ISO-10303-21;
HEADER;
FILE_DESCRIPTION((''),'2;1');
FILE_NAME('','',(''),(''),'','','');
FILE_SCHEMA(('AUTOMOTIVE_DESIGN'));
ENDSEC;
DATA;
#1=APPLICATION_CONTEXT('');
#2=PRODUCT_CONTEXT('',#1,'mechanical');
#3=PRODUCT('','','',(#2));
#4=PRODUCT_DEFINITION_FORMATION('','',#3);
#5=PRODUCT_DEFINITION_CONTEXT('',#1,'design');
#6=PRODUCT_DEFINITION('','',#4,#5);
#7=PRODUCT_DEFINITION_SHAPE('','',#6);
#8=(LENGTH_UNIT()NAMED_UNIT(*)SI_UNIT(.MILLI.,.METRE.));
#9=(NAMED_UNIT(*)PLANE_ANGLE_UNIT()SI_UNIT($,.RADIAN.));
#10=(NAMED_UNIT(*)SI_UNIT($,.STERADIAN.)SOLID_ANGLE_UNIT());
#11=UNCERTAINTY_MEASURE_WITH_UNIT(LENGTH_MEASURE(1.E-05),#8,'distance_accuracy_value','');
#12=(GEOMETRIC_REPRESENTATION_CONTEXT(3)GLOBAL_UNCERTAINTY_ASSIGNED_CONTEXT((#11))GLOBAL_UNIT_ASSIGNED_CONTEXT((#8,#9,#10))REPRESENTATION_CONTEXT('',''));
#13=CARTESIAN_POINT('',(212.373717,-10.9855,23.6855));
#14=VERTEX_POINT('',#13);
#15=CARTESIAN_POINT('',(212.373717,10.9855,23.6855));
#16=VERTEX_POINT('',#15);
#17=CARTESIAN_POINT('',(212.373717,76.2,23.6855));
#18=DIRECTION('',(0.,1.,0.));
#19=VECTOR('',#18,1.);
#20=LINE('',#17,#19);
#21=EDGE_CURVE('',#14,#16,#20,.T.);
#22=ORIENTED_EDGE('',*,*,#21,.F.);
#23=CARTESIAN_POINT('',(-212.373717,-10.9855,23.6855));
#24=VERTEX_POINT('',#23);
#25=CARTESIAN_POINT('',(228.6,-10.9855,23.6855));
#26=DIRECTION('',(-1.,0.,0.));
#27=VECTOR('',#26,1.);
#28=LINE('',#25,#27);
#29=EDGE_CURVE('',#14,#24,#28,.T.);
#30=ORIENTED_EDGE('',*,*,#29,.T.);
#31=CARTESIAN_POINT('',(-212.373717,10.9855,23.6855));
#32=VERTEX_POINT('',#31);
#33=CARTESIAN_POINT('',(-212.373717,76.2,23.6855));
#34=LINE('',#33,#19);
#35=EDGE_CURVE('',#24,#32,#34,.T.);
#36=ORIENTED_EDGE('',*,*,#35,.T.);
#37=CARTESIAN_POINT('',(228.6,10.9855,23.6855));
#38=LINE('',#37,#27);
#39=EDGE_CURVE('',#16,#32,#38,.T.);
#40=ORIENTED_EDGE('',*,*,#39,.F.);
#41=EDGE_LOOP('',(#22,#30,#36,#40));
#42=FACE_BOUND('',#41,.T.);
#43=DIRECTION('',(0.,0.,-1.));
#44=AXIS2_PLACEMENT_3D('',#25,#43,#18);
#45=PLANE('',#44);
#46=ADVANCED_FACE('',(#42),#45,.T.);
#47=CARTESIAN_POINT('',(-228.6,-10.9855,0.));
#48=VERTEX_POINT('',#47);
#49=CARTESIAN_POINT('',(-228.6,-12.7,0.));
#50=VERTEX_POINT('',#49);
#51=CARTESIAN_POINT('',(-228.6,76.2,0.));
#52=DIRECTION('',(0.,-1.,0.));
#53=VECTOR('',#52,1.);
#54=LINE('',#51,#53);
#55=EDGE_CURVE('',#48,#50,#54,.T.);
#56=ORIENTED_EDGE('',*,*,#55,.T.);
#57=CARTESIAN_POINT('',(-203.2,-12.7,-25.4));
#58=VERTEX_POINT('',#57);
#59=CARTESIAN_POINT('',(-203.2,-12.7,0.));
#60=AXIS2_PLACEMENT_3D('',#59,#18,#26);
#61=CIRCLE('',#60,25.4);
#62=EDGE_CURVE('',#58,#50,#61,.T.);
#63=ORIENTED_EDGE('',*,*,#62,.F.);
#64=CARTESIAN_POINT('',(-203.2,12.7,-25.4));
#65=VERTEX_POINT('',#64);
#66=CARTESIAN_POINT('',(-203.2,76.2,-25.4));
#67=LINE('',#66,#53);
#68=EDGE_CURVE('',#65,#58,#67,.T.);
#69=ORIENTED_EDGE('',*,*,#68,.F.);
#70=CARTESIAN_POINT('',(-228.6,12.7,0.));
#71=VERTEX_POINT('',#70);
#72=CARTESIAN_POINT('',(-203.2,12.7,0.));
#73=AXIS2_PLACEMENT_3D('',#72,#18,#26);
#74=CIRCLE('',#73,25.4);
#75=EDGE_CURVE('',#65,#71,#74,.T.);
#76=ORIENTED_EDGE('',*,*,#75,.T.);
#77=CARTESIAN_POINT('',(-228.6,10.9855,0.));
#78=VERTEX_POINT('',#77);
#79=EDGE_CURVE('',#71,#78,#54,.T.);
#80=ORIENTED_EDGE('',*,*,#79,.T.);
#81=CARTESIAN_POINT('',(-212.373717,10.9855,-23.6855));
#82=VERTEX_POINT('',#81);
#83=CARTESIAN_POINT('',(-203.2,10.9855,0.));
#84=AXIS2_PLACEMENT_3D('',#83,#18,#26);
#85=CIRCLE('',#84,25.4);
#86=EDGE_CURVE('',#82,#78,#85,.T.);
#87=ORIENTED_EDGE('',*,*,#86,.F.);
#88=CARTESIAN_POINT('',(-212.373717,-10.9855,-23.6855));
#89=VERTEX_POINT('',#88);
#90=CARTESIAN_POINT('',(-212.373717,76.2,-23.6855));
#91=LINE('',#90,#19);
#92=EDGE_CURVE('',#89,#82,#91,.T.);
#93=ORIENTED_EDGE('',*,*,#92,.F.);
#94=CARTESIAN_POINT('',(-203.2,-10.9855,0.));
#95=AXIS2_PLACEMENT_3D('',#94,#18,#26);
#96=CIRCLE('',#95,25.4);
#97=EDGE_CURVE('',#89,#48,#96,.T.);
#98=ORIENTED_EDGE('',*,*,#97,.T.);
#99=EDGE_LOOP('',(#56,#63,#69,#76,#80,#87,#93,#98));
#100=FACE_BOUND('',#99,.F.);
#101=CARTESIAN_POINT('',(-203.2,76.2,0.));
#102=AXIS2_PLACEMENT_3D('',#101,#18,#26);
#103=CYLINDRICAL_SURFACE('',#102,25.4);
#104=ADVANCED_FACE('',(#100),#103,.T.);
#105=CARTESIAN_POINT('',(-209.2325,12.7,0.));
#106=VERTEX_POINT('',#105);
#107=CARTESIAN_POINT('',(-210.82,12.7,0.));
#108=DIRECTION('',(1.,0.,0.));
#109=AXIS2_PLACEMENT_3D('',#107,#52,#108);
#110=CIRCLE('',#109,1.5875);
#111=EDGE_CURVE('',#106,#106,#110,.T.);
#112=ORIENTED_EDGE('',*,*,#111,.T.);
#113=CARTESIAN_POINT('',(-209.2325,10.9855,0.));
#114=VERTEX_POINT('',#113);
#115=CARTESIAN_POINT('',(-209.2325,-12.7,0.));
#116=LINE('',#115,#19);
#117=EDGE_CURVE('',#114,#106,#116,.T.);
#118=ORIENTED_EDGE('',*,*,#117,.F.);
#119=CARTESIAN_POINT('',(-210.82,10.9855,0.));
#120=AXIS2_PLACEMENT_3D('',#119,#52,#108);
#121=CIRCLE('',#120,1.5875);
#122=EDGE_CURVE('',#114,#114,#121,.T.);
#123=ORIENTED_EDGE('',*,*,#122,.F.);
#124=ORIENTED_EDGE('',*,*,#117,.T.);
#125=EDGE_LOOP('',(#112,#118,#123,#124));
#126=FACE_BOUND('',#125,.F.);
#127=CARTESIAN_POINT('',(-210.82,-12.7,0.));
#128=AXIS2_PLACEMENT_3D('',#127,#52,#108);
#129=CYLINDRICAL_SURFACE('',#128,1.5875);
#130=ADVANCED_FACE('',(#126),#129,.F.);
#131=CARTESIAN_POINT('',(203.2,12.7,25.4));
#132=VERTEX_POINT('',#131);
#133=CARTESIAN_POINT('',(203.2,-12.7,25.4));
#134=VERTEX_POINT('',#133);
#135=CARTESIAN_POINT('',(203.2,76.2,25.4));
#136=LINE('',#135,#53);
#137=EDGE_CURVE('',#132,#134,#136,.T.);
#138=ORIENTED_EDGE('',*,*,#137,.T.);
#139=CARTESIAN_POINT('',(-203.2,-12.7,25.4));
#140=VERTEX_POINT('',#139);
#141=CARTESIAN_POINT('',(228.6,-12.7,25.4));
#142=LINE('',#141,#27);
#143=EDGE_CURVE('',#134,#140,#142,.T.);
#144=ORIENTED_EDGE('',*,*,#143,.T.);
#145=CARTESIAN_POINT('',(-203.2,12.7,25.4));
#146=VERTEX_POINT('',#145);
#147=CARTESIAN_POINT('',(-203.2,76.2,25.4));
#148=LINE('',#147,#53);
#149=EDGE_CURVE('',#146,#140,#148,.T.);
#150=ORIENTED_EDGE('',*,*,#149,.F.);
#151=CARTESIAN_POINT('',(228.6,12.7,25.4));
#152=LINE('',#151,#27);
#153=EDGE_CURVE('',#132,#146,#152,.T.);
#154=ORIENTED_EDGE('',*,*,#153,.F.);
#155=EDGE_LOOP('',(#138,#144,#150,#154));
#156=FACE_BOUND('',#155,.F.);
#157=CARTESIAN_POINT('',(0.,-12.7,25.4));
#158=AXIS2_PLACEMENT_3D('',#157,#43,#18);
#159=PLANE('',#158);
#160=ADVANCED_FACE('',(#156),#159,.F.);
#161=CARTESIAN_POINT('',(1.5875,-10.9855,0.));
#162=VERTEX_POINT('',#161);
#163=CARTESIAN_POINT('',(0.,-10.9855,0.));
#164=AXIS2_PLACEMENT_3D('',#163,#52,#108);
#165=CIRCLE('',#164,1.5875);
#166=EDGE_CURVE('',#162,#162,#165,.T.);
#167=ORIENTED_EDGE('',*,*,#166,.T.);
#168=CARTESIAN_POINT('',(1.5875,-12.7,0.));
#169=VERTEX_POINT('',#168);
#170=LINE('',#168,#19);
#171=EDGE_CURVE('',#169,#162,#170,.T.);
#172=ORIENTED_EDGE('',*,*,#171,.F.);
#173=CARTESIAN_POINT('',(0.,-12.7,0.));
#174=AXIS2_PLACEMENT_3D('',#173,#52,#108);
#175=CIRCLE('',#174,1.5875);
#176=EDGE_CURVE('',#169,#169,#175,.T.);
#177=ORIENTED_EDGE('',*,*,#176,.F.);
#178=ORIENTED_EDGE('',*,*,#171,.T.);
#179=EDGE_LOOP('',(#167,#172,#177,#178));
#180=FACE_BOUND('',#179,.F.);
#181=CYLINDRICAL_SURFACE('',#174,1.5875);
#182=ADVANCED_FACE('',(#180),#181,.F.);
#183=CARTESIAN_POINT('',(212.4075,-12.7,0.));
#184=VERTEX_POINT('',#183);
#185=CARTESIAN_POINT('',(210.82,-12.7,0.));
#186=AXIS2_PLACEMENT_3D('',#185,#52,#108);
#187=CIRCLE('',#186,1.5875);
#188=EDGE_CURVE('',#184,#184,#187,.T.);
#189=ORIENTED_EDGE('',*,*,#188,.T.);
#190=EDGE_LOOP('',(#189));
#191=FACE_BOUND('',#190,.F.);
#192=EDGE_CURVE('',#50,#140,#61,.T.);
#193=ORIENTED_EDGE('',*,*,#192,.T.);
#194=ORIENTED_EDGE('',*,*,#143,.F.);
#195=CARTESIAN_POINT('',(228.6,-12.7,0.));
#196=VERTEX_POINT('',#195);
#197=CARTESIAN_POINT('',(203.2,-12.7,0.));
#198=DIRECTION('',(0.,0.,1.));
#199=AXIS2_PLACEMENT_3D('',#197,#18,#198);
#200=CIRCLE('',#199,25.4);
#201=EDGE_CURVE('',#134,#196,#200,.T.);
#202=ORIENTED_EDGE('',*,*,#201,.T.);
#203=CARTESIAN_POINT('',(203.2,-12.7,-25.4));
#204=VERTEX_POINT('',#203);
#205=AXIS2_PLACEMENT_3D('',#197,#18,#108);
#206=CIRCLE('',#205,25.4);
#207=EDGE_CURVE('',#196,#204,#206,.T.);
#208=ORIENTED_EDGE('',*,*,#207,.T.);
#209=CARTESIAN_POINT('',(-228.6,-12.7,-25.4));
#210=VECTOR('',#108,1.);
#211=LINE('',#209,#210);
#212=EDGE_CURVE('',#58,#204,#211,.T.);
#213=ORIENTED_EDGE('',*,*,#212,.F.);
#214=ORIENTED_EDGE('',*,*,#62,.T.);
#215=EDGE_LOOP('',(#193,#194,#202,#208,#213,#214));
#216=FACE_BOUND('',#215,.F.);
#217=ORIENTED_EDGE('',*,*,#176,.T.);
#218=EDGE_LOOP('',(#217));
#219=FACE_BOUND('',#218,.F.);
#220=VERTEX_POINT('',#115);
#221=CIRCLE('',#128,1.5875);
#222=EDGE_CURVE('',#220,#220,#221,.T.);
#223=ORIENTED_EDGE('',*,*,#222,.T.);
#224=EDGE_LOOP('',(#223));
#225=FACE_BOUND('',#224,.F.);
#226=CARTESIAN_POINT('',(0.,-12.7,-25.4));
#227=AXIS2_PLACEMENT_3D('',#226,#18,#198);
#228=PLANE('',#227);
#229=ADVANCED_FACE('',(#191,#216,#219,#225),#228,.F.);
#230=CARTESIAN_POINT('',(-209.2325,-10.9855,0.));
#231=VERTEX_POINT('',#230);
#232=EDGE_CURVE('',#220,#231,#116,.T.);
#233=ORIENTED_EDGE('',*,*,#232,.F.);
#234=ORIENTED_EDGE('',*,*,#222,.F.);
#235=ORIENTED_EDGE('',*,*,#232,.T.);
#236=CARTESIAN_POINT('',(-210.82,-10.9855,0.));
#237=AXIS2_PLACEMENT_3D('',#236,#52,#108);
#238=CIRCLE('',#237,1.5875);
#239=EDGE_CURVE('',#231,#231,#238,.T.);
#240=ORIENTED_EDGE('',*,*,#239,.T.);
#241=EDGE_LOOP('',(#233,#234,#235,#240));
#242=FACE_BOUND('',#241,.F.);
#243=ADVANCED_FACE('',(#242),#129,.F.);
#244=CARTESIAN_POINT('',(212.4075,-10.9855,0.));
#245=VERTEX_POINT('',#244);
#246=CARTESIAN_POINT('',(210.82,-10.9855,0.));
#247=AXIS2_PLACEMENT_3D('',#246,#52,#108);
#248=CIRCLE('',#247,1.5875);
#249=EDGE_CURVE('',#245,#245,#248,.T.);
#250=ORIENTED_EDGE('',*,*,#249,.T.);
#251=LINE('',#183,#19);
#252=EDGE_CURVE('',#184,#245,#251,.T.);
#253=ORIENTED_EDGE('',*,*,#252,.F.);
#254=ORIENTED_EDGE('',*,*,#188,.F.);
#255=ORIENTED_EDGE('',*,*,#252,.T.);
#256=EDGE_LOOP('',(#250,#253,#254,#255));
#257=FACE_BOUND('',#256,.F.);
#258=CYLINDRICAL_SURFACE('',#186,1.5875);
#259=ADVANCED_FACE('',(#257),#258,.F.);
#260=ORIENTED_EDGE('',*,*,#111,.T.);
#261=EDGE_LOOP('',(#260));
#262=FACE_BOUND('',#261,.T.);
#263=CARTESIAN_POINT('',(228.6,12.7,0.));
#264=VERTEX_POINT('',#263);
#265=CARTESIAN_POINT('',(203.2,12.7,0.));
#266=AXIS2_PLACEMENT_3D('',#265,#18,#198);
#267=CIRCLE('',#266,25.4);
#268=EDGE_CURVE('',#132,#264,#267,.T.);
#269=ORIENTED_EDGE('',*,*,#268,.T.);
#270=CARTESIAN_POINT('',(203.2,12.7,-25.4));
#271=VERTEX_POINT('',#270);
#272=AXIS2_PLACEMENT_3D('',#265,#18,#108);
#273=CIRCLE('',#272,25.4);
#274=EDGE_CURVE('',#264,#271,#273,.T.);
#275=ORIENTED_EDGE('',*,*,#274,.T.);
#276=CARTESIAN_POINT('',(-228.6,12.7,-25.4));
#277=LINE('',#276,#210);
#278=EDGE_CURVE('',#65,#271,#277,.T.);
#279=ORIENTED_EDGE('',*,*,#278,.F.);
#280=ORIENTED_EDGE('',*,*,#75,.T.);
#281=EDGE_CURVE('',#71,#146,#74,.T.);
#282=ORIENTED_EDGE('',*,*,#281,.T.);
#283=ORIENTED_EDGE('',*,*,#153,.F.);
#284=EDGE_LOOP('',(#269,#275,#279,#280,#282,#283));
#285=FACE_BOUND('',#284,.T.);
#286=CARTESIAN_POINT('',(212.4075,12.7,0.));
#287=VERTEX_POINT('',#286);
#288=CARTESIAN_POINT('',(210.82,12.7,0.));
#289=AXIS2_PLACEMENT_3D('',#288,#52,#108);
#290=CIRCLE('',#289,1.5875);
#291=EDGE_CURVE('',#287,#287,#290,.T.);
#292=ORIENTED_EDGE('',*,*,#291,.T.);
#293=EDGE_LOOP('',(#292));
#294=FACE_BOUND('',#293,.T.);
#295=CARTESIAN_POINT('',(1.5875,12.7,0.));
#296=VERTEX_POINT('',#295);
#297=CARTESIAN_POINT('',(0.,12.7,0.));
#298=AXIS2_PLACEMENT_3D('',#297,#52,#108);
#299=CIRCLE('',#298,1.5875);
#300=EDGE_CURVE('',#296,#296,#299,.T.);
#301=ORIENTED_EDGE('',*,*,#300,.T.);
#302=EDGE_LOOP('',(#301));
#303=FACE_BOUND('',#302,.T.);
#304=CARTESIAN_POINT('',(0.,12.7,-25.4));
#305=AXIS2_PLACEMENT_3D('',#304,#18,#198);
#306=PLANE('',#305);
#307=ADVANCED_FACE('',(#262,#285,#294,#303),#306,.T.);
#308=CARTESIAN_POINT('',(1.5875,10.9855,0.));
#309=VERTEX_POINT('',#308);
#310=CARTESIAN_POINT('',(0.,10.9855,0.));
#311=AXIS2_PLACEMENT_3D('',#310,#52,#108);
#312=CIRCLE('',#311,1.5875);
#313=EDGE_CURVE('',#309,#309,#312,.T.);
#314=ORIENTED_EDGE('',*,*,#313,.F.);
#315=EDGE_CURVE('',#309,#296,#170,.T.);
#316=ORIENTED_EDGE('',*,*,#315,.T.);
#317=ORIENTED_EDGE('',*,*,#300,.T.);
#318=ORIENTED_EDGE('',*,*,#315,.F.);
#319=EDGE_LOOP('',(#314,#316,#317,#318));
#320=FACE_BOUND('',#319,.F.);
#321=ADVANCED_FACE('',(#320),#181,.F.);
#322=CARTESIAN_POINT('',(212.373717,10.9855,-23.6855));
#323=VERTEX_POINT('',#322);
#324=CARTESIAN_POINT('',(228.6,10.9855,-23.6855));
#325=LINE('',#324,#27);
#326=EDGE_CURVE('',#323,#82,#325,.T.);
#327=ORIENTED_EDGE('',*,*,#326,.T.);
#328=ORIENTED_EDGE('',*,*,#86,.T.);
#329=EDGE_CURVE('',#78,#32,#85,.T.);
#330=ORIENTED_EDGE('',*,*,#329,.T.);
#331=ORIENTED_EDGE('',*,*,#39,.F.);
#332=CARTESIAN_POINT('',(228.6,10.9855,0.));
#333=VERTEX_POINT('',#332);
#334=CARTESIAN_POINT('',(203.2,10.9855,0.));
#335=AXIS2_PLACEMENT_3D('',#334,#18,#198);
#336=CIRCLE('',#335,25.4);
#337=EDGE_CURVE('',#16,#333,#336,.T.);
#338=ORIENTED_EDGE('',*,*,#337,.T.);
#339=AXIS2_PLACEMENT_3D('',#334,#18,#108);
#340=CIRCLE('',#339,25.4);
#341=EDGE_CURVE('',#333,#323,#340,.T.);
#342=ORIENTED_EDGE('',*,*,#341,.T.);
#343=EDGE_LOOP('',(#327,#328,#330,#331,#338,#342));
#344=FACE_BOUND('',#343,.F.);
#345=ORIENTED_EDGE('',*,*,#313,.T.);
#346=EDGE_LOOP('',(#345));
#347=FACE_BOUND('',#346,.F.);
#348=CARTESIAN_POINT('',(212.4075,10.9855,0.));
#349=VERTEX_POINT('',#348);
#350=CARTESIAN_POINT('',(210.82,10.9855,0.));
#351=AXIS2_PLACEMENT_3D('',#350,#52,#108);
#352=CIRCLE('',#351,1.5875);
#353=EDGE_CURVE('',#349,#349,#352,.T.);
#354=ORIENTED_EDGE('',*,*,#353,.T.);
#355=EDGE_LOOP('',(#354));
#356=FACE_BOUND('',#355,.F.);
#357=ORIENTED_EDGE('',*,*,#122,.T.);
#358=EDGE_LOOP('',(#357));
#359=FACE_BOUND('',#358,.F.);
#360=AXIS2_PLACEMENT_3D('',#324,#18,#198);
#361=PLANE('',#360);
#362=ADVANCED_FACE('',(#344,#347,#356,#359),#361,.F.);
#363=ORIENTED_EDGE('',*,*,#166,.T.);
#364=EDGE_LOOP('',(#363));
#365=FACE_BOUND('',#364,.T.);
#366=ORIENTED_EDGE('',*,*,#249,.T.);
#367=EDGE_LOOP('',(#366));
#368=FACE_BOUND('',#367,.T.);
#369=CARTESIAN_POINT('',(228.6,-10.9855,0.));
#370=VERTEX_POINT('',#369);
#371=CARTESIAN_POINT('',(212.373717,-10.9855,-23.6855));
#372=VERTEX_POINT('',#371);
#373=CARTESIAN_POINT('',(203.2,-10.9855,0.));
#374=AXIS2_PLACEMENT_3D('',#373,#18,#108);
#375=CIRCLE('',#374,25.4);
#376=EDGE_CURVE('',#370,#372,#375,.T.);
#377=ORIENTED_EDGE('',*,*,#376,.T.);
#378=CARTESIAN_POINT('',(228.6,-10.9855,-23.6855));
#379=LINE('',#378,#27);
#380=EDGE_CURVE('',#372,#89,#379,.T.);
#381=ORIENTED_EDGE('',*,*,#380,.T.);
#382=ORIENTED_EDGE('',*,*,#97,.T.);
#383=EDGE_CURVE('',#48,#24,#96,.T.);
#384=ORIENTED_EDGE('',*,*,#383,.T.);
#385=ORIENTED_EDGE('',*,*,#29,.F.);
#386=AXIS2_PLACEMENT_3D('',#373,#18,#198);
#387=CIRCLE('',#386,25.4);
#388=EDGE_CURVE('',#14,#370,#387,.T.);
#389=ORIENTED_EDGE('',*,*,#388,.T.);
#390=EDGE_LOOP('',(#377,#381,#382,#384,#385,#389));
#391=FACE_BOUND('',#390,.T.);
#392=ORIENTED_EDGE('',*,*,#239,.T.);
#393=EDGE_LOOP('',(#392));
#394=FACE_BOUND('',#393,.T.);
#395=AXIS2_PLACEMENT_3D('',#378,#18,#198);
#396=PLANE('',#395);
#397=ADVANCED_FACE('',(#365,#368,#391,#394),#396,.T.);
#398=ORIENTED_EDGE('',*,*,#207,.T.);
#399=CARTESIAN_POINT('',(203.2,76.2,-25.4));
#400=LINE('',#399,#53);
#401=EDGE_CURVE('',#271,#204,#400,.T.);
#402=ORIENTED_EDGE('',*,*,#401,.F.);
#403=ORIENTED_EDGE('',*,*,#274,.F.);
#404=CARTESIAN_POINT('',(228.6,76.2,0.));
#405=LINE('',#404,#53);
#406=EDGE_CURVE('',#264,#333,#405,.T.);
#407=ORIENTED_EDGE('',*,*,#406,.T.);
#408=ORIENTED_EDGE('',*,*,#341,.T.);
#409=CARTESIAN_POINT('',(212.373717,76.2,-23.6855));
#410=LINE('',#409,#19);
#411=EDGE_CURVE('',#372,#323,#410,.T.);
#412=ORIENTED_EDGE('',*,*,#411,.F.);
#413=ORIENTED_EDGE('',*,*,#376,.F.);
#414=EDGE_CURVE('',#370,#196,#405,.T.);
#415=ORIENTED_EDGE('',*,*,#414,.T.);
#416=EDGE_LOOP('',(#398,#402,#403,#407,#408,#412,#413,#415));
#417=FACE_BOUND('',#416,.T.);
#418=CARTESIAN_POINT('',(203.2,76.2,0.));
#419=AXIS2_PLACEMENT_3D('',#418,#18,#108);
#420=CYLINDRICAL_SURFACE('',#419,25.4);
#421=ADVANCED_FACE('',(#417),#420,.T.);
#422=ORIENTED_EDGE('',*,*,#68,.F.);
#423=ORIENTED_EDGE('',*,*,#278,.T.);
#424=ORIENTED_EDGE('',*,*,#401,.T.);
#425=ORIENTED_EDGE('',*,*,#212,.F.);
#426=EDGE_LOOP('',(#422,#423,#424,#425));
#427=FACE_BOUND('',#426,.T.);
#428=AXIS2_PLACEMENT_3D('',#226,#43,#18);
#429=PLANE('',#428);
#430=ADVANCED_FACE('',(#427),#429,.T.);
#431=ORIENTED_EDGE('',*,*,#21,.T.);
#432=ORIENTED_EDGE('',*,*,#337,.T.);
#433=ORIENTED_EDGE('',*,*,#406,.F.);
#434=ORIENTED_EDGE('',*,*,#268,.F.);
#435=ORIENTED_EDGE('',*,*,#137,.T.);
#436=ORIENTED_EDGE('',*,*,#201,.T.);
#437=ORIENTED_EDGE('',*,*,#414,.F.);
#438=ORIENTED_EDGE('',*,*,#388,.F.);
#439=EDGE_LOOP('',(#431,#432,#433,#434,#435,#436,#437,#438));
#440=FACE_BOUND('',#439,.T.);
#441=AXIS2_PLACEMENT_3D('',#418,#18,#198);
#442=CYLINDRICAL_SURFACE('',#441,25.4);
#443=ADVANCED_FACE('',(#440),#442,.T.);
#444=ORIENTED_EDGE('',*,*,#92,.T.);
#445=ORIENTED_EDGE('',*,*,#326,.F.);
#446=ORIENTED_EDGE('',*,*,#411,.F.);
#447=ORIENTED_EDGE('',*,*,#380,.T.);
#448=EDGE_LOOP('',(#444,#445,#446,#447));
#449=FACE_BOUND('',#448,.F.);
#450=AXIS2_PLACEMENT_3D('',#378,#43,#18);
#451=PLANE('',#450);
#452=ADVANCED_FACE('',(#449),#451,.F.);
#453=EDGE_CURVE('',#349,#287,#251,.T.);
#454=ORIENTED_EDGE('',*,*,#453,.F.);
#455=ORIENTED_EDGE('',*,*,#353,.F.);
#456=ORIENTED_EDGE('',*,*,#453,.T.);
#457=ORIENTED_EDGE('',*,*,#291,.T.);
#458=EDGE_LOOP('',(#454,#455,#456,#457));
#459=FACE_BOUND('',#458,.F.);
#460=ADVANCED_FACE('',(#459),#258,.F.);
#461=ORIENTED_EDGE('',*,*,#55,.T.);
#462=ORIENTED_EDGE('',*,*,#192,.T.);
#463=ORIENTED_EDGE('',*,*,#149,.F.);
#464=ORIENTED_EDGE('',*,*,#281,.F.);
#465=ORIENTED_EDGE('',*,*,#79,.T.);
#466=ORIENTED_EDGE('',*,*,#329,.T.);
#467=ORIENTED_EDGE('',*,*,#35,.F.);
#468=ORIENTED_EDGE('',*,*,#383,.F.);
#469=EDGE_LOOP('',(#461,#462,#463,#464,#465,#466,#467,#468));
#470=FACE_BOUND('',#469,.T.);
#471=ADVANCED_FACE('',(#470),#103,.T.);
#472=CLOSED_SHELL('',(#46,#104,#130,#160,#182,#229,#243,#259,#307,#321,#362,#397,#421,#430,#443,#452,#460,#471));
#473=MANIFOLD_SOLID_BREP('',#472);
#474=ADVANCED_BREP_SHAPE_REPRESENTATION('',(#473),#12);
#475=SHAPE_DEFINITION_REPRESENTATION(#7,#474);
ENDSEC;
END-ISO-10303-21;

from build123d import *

# Parameters (mm, degrees)
F0_W        = 25.4
F0_H        = 50.8
F1_DEPTH    = 228.6
F2_W        = 21.971
F2_H        = 47.371
F3_DEPTH    = 457.201
F4_R        = 1.5875
F5_DEPTH    = 25.401
F6_R        = 1.5875
F7_DEPTH    = 25.401
F8_T1_DEPTH = 152.4
F9_T1_DEPTH = 152.4


# Not quite as in the source:
# - a fillet or chamfer that OpenCascade refuses, or shapes differently, is made with other operations: its cross-section is extruded or revolved along the edge and cut away or added


with BuildPart() as f1:
    # F0 (on Right) → F1 (new body, symmetric)
    with BuildSketch(Plane.YZ):
        Rectangle(F0_W, F0_H)
    extrude(amount=F1_DEPTH, both=True)

    # F2 (on face) → F3 (cut, through all)
    with BuildSketch(Plane.YZ.offset(228.6)):
        Rectangle(F2_W, F2_H)
    extrude(amount=-F3_DEPTH, mode=Mode.SUBTRACT)

    # F4 (on face) → F5 (cut, through all)
    with BuildSketch(Plane.XZ.offset(12.7)):
        with Locations((-210.82, 0)):
            Circle(F4_R)
        Circle(F4_R)
    extrude(amount=-F5_DEPTH, mode=Mode.SUBTRACT)

    # F6 (on face) → F7 (cut, through all)
    with BuildSketch(Plane.XZ.offset(12.7)):
        with Locations((210.82, 0)):
            Circle(F6_R)
    extrude(amount=-F7_DEPTH, mode=Mode.SUBTRACT)

    # F8: fillet of radius 25.4 on 2 edges, made by hand

    # F8_s2 → F8_t1 (cut)
    with BuildSketch(Plane.XZ.offset(-76.2)):
        with BuildLine():
            ThreePointArc((-228.6, 0), (-221.1605122421, -17.9605122421), (-203.2, -25.4))
            Line((-203.2, -25.4), (-228.6, -25.4))
            Line((-228.6, -25.4), (-228.6, 0))
        make_face()
        with BuildLine():
            ThreePointArc((-228.6, 0), (-221.1605122421, 17.9605122421), (-203.2, 25.4))
            Line((-203.2, 25.4), (-228.6, 25.4))
            Line((-228.6, 25.4), (-228.6, 0))
        make_face()
    extrude(amount=F8_T1_DEPTH, mode=Mode.SUBTRACT)

    # F9: fillet of radius 25.4 on 2 edges, made by hand

    # F9_s2 → F9_t1 (cut)
    with BuildSketch(Plane.XZ.offset(-76.2)):
        with BuildLine():
            ThreePointArc((203.2, 25.4), (221.1605122421, 17.9605122421), (228.6, 0))
            Line((228.6, 0), (228.6, 25.4))
            Line((228.6, 25.4), (203.2, 25.4))
        make_face()
        with BuildLine():
            ThreePointArc((228.6, 0), (221.1605122421, -17.9605122421), (203.2, -25.4))
            Line((203.2, -25.4), (228.6, -25.4))
            Line((228.6, -25.4), (228.6, 0))
        make_face()
    extrude(amount=F9_T1_DEPTH, mode=Mode.SUBTRACT)


solid = f1.part
